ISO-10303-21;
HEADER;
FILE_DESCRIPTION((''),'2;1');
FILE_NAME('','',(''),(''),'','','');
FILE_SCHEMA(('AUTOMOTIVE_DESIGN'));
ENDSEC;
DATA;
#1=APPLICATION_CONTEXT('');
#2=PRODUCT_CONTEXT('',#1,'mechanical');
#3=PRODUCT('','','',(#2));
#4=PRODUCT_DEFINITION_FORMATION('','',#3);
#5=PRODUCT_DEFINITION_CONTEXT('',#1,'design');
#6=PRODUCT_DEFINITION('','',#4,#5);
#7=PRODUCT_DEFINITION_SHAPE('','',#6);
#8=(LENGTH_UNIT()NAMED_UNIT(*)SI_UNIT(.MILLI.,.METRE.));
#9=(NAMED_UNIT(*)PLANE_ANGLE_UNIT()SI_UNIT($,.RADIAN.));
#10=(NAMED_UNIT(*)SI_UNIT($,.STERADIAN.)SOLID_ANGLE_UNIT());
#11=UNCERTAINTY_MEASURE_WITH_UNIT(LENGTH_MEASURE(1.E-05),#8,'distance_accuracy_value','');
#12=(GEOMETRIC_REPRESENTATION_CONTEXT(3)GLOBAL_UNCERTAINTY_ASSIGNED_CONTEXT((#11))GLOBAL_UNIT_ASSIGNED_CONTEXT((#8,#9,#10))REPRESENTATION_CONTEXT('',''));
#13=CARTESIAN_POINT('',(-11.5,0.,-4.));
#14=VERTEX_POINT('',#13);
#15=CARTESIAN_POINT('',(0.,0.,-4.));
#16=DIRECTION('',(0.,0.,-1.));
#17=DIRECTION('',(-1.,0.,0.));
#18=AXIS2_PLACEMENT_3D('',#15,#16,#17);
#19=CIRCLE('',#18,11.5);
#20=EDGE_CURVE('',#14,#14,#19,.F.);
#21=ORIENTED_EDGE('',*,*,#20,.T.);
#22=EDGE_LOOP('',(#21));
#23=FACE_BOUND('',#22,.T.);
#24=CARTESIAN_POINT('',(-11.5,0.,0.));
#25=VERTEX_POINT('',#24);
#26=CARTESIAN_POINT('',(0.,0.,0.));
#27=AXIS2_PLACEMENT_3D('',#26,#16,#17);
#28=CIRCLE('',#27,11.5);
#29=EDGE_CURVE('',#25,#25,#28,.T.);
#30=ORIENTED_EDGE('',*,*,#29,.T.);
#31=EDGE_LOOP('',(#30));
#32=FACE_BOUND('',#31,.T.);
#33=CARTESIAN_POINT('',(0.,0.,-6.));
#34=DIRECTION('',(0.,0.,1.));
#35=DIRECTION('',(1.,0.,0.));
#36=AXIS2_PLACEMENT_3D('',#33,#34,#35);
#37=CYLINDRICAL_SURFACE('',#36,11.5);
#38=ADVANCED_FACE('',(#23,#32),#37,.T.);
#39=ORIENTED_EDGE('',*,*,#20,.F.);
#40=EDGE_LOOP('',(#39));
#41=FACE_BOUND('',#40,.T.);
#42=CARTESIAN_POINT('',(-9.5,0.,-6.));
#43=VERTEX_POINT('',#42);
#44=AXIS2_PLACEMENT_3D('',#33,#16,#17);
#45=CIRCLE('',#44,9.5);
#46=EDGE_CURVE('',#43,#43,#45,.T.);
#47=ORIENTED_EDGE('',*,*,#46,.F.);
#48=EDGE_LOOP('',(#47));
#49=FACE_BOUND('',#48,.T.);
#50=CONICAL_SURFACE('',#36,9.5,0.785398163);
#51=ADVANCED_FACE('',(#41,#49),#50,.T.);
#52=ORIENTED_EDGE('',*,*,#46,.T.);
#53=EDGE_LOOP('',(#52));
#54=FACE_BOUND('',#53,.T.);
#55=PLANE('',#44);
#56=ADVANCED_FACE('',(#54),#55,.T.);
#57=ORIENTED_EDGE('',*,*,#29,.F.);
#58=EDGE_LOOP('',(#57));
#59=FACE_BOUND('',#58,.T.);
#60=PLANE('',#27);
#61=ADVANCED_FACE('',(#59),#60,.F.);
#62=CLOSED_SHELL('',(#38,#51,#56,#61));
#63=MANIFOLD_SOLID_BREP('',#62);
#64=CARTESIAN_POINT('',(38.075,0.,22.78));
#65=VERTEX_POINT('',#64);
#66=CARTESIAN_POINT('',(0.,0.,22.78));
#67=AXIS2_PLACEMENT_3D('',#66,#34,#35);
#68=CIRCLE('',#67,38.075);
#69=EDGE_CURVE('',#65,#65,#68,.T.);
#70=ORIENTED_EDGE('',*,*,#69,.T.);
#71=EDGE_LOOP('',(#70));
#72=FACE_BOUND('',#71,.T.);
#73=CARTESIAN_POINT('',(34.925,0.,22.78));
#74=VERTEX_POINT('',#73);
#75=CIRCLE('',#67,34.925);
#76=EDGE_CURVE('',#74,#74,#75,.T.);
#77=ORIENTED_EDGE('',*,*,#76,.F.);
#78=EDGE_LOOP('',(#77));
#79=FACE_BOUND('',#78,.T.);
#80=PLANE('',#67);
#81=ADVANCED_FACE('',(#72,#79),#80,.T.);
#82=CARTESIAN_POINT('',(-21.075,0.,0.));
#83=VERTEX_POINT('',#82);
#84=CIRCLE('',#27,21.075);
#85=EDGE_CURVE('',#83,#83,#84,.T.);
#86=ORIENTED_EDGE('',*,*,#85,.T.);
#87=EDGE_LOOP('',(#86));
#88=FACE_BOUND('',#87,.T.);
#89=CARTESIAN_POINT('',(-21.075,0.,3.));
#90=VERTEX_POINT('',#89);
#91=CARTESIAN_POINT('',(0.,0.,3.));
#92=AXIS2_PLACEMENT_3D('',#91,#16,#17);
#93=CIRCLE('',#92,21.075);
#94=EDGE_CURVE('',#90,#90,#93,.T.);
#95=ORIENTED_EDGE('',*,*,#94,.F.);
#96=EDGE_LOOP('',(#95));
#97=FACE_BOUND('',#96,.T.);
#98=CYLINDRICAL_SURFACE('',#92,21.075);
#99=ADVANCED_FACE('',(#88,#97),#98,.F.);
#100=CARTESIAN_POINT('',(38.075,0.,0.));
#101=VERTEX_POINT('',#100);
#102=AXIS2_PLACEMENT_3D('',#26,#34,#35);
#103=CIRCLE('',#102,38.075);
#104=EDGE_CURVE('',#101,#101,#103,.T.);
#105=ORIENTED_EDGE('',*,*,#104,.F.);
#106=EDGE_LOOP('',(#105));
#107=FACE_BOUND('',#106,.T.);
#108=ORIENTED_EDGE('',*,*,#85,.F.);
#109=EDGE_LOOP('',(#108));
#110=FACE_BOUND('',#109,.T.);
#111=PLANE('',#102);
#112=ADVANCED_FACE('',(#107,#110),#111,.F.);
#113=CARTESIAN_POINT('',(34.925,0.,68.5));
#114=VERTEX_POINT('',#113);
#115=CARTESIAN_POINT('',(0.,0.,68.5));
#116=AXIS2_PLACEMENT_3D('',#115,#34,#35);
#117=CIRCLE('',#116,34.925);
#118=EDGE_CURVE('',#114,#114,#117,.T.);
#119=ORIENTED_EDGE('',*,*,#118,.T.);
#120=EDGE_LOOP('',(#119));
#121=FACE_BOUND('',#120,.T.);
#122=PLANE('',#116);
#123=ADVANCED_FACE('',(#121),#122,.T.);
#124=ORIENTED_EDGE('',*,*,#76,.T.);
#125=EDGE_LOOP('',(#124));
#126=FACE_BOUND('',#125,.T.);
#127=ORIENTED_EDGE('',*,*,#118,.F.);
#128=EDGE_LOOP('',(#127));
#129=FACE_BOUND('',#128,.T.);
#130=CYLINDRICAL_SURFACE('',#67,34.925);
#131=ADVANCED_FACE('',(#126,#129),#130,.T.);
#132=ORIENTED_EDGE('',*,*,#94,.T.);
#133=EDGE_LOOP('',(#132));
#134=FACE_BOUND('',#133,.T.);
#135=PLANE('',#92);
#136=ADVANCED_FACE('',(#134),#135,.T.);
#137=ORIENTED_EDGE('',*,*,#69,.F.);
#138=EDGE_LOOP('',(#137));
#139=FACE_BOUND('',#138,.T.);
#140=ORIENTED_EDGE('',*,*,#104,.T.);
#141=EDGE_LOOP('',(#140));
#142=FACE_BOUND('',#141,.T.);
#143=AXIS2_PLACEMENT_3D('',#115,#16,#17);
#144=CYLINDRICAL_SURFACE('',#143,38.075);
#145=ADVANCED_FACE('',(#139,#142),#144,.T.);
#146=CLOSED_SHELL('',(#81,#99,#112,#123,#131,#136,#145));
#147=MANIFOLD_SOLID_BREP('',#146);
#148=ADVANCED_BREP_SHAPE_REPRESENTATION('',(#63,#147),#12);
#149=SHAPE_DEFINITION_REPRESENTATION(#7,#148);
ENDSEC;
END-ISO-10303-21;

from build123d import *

# Parameters (mm, degrees)
SKETCH1_R           = 38.075
BOSS_EXTRUDE1_DEPTH = 68.5
SKETCH2_R           = 11.5
BOSS_EXTRUDE2_DEPTH = 6
CHAMFER1_SIZE       = 2
SKETCH3_R           = 21.075
CUT_EXTRUDE1_DEPTH  = 3
SKETCH8_R           = 38.075
SKETCH8_R_2         = 34.925
CUT_EXTRUDE2_DEPTH  = 45.72


with BuildPart() as part:
    # Sketch1 → Boss-Extrude1 (new body)
    with BuildSketch(Plane.XY):
        Circle(SKETCH1_R)
    extrude(amount=BOSS_EXTRUDE1_DEPTH)

    # Sketch2 → Boss-Extrude2 (add)
    with BuildSketch(Plane(origin=(0, 0, 0), x_dir=(-1, 0, 0), z_dir=(0, 0, -1))):
        Circle(SKETCH2_R)
    extrude(amount=BOSS_EXTRUDE2_DEPTH)

    # Chamfer1
    chamfer1_edges = [part.edges().sort_by_distance(p)[0] for p in [
        (11.5, 0, -6),
    ]]
    chamfer(chamfer1_edges, length=CHAMFER1_SIZE)

    # Sketch3 → Cut-Extrude1 (cut)
    with BuildSketch(Plane(origin=(0, 0, 0), x_dir=(-1, 0, 0), z_dir=(0, 0, -1))):
        Circle(SKETCH3_R)
    extrude(amount=-CUT_EXTRUDE1_DEPTH, mode=Mode.SUBTRACT)


with BuildPart() as cut_extrude1_piece_1:
    # of the separate pieces the step leaves, piece 1, a body of its own (cut_extrude1_pieces)
    add(part.part.solids().sort_by_distance((38.075, 0, 0))[0])

    # Sketch8 → Cut-Extrude2 (cut)
    with BuildSketch(Plane.XY.offset(68.5)):
        Circle(SKETCH8_R)
        Circle(SKETCH8_R_2, mode=Mode.SUBTRACT)
    extrude(amount=-CUT_EXTRUDE2_DEPTH, mode=Mode.SUBTRACT)


with BuildPart() as cut_extrude1_piece_2:
    # of the separate pieces the step leaves, piece 2, a body of its own (cut_extrude1_pieces)
    add(part.part.solids().sort_by_distance((-11.5, 0, -4))[0])


solid = Compound([cut_extrude1_piece_1.part, cut_extrude1_piece_2.part])
